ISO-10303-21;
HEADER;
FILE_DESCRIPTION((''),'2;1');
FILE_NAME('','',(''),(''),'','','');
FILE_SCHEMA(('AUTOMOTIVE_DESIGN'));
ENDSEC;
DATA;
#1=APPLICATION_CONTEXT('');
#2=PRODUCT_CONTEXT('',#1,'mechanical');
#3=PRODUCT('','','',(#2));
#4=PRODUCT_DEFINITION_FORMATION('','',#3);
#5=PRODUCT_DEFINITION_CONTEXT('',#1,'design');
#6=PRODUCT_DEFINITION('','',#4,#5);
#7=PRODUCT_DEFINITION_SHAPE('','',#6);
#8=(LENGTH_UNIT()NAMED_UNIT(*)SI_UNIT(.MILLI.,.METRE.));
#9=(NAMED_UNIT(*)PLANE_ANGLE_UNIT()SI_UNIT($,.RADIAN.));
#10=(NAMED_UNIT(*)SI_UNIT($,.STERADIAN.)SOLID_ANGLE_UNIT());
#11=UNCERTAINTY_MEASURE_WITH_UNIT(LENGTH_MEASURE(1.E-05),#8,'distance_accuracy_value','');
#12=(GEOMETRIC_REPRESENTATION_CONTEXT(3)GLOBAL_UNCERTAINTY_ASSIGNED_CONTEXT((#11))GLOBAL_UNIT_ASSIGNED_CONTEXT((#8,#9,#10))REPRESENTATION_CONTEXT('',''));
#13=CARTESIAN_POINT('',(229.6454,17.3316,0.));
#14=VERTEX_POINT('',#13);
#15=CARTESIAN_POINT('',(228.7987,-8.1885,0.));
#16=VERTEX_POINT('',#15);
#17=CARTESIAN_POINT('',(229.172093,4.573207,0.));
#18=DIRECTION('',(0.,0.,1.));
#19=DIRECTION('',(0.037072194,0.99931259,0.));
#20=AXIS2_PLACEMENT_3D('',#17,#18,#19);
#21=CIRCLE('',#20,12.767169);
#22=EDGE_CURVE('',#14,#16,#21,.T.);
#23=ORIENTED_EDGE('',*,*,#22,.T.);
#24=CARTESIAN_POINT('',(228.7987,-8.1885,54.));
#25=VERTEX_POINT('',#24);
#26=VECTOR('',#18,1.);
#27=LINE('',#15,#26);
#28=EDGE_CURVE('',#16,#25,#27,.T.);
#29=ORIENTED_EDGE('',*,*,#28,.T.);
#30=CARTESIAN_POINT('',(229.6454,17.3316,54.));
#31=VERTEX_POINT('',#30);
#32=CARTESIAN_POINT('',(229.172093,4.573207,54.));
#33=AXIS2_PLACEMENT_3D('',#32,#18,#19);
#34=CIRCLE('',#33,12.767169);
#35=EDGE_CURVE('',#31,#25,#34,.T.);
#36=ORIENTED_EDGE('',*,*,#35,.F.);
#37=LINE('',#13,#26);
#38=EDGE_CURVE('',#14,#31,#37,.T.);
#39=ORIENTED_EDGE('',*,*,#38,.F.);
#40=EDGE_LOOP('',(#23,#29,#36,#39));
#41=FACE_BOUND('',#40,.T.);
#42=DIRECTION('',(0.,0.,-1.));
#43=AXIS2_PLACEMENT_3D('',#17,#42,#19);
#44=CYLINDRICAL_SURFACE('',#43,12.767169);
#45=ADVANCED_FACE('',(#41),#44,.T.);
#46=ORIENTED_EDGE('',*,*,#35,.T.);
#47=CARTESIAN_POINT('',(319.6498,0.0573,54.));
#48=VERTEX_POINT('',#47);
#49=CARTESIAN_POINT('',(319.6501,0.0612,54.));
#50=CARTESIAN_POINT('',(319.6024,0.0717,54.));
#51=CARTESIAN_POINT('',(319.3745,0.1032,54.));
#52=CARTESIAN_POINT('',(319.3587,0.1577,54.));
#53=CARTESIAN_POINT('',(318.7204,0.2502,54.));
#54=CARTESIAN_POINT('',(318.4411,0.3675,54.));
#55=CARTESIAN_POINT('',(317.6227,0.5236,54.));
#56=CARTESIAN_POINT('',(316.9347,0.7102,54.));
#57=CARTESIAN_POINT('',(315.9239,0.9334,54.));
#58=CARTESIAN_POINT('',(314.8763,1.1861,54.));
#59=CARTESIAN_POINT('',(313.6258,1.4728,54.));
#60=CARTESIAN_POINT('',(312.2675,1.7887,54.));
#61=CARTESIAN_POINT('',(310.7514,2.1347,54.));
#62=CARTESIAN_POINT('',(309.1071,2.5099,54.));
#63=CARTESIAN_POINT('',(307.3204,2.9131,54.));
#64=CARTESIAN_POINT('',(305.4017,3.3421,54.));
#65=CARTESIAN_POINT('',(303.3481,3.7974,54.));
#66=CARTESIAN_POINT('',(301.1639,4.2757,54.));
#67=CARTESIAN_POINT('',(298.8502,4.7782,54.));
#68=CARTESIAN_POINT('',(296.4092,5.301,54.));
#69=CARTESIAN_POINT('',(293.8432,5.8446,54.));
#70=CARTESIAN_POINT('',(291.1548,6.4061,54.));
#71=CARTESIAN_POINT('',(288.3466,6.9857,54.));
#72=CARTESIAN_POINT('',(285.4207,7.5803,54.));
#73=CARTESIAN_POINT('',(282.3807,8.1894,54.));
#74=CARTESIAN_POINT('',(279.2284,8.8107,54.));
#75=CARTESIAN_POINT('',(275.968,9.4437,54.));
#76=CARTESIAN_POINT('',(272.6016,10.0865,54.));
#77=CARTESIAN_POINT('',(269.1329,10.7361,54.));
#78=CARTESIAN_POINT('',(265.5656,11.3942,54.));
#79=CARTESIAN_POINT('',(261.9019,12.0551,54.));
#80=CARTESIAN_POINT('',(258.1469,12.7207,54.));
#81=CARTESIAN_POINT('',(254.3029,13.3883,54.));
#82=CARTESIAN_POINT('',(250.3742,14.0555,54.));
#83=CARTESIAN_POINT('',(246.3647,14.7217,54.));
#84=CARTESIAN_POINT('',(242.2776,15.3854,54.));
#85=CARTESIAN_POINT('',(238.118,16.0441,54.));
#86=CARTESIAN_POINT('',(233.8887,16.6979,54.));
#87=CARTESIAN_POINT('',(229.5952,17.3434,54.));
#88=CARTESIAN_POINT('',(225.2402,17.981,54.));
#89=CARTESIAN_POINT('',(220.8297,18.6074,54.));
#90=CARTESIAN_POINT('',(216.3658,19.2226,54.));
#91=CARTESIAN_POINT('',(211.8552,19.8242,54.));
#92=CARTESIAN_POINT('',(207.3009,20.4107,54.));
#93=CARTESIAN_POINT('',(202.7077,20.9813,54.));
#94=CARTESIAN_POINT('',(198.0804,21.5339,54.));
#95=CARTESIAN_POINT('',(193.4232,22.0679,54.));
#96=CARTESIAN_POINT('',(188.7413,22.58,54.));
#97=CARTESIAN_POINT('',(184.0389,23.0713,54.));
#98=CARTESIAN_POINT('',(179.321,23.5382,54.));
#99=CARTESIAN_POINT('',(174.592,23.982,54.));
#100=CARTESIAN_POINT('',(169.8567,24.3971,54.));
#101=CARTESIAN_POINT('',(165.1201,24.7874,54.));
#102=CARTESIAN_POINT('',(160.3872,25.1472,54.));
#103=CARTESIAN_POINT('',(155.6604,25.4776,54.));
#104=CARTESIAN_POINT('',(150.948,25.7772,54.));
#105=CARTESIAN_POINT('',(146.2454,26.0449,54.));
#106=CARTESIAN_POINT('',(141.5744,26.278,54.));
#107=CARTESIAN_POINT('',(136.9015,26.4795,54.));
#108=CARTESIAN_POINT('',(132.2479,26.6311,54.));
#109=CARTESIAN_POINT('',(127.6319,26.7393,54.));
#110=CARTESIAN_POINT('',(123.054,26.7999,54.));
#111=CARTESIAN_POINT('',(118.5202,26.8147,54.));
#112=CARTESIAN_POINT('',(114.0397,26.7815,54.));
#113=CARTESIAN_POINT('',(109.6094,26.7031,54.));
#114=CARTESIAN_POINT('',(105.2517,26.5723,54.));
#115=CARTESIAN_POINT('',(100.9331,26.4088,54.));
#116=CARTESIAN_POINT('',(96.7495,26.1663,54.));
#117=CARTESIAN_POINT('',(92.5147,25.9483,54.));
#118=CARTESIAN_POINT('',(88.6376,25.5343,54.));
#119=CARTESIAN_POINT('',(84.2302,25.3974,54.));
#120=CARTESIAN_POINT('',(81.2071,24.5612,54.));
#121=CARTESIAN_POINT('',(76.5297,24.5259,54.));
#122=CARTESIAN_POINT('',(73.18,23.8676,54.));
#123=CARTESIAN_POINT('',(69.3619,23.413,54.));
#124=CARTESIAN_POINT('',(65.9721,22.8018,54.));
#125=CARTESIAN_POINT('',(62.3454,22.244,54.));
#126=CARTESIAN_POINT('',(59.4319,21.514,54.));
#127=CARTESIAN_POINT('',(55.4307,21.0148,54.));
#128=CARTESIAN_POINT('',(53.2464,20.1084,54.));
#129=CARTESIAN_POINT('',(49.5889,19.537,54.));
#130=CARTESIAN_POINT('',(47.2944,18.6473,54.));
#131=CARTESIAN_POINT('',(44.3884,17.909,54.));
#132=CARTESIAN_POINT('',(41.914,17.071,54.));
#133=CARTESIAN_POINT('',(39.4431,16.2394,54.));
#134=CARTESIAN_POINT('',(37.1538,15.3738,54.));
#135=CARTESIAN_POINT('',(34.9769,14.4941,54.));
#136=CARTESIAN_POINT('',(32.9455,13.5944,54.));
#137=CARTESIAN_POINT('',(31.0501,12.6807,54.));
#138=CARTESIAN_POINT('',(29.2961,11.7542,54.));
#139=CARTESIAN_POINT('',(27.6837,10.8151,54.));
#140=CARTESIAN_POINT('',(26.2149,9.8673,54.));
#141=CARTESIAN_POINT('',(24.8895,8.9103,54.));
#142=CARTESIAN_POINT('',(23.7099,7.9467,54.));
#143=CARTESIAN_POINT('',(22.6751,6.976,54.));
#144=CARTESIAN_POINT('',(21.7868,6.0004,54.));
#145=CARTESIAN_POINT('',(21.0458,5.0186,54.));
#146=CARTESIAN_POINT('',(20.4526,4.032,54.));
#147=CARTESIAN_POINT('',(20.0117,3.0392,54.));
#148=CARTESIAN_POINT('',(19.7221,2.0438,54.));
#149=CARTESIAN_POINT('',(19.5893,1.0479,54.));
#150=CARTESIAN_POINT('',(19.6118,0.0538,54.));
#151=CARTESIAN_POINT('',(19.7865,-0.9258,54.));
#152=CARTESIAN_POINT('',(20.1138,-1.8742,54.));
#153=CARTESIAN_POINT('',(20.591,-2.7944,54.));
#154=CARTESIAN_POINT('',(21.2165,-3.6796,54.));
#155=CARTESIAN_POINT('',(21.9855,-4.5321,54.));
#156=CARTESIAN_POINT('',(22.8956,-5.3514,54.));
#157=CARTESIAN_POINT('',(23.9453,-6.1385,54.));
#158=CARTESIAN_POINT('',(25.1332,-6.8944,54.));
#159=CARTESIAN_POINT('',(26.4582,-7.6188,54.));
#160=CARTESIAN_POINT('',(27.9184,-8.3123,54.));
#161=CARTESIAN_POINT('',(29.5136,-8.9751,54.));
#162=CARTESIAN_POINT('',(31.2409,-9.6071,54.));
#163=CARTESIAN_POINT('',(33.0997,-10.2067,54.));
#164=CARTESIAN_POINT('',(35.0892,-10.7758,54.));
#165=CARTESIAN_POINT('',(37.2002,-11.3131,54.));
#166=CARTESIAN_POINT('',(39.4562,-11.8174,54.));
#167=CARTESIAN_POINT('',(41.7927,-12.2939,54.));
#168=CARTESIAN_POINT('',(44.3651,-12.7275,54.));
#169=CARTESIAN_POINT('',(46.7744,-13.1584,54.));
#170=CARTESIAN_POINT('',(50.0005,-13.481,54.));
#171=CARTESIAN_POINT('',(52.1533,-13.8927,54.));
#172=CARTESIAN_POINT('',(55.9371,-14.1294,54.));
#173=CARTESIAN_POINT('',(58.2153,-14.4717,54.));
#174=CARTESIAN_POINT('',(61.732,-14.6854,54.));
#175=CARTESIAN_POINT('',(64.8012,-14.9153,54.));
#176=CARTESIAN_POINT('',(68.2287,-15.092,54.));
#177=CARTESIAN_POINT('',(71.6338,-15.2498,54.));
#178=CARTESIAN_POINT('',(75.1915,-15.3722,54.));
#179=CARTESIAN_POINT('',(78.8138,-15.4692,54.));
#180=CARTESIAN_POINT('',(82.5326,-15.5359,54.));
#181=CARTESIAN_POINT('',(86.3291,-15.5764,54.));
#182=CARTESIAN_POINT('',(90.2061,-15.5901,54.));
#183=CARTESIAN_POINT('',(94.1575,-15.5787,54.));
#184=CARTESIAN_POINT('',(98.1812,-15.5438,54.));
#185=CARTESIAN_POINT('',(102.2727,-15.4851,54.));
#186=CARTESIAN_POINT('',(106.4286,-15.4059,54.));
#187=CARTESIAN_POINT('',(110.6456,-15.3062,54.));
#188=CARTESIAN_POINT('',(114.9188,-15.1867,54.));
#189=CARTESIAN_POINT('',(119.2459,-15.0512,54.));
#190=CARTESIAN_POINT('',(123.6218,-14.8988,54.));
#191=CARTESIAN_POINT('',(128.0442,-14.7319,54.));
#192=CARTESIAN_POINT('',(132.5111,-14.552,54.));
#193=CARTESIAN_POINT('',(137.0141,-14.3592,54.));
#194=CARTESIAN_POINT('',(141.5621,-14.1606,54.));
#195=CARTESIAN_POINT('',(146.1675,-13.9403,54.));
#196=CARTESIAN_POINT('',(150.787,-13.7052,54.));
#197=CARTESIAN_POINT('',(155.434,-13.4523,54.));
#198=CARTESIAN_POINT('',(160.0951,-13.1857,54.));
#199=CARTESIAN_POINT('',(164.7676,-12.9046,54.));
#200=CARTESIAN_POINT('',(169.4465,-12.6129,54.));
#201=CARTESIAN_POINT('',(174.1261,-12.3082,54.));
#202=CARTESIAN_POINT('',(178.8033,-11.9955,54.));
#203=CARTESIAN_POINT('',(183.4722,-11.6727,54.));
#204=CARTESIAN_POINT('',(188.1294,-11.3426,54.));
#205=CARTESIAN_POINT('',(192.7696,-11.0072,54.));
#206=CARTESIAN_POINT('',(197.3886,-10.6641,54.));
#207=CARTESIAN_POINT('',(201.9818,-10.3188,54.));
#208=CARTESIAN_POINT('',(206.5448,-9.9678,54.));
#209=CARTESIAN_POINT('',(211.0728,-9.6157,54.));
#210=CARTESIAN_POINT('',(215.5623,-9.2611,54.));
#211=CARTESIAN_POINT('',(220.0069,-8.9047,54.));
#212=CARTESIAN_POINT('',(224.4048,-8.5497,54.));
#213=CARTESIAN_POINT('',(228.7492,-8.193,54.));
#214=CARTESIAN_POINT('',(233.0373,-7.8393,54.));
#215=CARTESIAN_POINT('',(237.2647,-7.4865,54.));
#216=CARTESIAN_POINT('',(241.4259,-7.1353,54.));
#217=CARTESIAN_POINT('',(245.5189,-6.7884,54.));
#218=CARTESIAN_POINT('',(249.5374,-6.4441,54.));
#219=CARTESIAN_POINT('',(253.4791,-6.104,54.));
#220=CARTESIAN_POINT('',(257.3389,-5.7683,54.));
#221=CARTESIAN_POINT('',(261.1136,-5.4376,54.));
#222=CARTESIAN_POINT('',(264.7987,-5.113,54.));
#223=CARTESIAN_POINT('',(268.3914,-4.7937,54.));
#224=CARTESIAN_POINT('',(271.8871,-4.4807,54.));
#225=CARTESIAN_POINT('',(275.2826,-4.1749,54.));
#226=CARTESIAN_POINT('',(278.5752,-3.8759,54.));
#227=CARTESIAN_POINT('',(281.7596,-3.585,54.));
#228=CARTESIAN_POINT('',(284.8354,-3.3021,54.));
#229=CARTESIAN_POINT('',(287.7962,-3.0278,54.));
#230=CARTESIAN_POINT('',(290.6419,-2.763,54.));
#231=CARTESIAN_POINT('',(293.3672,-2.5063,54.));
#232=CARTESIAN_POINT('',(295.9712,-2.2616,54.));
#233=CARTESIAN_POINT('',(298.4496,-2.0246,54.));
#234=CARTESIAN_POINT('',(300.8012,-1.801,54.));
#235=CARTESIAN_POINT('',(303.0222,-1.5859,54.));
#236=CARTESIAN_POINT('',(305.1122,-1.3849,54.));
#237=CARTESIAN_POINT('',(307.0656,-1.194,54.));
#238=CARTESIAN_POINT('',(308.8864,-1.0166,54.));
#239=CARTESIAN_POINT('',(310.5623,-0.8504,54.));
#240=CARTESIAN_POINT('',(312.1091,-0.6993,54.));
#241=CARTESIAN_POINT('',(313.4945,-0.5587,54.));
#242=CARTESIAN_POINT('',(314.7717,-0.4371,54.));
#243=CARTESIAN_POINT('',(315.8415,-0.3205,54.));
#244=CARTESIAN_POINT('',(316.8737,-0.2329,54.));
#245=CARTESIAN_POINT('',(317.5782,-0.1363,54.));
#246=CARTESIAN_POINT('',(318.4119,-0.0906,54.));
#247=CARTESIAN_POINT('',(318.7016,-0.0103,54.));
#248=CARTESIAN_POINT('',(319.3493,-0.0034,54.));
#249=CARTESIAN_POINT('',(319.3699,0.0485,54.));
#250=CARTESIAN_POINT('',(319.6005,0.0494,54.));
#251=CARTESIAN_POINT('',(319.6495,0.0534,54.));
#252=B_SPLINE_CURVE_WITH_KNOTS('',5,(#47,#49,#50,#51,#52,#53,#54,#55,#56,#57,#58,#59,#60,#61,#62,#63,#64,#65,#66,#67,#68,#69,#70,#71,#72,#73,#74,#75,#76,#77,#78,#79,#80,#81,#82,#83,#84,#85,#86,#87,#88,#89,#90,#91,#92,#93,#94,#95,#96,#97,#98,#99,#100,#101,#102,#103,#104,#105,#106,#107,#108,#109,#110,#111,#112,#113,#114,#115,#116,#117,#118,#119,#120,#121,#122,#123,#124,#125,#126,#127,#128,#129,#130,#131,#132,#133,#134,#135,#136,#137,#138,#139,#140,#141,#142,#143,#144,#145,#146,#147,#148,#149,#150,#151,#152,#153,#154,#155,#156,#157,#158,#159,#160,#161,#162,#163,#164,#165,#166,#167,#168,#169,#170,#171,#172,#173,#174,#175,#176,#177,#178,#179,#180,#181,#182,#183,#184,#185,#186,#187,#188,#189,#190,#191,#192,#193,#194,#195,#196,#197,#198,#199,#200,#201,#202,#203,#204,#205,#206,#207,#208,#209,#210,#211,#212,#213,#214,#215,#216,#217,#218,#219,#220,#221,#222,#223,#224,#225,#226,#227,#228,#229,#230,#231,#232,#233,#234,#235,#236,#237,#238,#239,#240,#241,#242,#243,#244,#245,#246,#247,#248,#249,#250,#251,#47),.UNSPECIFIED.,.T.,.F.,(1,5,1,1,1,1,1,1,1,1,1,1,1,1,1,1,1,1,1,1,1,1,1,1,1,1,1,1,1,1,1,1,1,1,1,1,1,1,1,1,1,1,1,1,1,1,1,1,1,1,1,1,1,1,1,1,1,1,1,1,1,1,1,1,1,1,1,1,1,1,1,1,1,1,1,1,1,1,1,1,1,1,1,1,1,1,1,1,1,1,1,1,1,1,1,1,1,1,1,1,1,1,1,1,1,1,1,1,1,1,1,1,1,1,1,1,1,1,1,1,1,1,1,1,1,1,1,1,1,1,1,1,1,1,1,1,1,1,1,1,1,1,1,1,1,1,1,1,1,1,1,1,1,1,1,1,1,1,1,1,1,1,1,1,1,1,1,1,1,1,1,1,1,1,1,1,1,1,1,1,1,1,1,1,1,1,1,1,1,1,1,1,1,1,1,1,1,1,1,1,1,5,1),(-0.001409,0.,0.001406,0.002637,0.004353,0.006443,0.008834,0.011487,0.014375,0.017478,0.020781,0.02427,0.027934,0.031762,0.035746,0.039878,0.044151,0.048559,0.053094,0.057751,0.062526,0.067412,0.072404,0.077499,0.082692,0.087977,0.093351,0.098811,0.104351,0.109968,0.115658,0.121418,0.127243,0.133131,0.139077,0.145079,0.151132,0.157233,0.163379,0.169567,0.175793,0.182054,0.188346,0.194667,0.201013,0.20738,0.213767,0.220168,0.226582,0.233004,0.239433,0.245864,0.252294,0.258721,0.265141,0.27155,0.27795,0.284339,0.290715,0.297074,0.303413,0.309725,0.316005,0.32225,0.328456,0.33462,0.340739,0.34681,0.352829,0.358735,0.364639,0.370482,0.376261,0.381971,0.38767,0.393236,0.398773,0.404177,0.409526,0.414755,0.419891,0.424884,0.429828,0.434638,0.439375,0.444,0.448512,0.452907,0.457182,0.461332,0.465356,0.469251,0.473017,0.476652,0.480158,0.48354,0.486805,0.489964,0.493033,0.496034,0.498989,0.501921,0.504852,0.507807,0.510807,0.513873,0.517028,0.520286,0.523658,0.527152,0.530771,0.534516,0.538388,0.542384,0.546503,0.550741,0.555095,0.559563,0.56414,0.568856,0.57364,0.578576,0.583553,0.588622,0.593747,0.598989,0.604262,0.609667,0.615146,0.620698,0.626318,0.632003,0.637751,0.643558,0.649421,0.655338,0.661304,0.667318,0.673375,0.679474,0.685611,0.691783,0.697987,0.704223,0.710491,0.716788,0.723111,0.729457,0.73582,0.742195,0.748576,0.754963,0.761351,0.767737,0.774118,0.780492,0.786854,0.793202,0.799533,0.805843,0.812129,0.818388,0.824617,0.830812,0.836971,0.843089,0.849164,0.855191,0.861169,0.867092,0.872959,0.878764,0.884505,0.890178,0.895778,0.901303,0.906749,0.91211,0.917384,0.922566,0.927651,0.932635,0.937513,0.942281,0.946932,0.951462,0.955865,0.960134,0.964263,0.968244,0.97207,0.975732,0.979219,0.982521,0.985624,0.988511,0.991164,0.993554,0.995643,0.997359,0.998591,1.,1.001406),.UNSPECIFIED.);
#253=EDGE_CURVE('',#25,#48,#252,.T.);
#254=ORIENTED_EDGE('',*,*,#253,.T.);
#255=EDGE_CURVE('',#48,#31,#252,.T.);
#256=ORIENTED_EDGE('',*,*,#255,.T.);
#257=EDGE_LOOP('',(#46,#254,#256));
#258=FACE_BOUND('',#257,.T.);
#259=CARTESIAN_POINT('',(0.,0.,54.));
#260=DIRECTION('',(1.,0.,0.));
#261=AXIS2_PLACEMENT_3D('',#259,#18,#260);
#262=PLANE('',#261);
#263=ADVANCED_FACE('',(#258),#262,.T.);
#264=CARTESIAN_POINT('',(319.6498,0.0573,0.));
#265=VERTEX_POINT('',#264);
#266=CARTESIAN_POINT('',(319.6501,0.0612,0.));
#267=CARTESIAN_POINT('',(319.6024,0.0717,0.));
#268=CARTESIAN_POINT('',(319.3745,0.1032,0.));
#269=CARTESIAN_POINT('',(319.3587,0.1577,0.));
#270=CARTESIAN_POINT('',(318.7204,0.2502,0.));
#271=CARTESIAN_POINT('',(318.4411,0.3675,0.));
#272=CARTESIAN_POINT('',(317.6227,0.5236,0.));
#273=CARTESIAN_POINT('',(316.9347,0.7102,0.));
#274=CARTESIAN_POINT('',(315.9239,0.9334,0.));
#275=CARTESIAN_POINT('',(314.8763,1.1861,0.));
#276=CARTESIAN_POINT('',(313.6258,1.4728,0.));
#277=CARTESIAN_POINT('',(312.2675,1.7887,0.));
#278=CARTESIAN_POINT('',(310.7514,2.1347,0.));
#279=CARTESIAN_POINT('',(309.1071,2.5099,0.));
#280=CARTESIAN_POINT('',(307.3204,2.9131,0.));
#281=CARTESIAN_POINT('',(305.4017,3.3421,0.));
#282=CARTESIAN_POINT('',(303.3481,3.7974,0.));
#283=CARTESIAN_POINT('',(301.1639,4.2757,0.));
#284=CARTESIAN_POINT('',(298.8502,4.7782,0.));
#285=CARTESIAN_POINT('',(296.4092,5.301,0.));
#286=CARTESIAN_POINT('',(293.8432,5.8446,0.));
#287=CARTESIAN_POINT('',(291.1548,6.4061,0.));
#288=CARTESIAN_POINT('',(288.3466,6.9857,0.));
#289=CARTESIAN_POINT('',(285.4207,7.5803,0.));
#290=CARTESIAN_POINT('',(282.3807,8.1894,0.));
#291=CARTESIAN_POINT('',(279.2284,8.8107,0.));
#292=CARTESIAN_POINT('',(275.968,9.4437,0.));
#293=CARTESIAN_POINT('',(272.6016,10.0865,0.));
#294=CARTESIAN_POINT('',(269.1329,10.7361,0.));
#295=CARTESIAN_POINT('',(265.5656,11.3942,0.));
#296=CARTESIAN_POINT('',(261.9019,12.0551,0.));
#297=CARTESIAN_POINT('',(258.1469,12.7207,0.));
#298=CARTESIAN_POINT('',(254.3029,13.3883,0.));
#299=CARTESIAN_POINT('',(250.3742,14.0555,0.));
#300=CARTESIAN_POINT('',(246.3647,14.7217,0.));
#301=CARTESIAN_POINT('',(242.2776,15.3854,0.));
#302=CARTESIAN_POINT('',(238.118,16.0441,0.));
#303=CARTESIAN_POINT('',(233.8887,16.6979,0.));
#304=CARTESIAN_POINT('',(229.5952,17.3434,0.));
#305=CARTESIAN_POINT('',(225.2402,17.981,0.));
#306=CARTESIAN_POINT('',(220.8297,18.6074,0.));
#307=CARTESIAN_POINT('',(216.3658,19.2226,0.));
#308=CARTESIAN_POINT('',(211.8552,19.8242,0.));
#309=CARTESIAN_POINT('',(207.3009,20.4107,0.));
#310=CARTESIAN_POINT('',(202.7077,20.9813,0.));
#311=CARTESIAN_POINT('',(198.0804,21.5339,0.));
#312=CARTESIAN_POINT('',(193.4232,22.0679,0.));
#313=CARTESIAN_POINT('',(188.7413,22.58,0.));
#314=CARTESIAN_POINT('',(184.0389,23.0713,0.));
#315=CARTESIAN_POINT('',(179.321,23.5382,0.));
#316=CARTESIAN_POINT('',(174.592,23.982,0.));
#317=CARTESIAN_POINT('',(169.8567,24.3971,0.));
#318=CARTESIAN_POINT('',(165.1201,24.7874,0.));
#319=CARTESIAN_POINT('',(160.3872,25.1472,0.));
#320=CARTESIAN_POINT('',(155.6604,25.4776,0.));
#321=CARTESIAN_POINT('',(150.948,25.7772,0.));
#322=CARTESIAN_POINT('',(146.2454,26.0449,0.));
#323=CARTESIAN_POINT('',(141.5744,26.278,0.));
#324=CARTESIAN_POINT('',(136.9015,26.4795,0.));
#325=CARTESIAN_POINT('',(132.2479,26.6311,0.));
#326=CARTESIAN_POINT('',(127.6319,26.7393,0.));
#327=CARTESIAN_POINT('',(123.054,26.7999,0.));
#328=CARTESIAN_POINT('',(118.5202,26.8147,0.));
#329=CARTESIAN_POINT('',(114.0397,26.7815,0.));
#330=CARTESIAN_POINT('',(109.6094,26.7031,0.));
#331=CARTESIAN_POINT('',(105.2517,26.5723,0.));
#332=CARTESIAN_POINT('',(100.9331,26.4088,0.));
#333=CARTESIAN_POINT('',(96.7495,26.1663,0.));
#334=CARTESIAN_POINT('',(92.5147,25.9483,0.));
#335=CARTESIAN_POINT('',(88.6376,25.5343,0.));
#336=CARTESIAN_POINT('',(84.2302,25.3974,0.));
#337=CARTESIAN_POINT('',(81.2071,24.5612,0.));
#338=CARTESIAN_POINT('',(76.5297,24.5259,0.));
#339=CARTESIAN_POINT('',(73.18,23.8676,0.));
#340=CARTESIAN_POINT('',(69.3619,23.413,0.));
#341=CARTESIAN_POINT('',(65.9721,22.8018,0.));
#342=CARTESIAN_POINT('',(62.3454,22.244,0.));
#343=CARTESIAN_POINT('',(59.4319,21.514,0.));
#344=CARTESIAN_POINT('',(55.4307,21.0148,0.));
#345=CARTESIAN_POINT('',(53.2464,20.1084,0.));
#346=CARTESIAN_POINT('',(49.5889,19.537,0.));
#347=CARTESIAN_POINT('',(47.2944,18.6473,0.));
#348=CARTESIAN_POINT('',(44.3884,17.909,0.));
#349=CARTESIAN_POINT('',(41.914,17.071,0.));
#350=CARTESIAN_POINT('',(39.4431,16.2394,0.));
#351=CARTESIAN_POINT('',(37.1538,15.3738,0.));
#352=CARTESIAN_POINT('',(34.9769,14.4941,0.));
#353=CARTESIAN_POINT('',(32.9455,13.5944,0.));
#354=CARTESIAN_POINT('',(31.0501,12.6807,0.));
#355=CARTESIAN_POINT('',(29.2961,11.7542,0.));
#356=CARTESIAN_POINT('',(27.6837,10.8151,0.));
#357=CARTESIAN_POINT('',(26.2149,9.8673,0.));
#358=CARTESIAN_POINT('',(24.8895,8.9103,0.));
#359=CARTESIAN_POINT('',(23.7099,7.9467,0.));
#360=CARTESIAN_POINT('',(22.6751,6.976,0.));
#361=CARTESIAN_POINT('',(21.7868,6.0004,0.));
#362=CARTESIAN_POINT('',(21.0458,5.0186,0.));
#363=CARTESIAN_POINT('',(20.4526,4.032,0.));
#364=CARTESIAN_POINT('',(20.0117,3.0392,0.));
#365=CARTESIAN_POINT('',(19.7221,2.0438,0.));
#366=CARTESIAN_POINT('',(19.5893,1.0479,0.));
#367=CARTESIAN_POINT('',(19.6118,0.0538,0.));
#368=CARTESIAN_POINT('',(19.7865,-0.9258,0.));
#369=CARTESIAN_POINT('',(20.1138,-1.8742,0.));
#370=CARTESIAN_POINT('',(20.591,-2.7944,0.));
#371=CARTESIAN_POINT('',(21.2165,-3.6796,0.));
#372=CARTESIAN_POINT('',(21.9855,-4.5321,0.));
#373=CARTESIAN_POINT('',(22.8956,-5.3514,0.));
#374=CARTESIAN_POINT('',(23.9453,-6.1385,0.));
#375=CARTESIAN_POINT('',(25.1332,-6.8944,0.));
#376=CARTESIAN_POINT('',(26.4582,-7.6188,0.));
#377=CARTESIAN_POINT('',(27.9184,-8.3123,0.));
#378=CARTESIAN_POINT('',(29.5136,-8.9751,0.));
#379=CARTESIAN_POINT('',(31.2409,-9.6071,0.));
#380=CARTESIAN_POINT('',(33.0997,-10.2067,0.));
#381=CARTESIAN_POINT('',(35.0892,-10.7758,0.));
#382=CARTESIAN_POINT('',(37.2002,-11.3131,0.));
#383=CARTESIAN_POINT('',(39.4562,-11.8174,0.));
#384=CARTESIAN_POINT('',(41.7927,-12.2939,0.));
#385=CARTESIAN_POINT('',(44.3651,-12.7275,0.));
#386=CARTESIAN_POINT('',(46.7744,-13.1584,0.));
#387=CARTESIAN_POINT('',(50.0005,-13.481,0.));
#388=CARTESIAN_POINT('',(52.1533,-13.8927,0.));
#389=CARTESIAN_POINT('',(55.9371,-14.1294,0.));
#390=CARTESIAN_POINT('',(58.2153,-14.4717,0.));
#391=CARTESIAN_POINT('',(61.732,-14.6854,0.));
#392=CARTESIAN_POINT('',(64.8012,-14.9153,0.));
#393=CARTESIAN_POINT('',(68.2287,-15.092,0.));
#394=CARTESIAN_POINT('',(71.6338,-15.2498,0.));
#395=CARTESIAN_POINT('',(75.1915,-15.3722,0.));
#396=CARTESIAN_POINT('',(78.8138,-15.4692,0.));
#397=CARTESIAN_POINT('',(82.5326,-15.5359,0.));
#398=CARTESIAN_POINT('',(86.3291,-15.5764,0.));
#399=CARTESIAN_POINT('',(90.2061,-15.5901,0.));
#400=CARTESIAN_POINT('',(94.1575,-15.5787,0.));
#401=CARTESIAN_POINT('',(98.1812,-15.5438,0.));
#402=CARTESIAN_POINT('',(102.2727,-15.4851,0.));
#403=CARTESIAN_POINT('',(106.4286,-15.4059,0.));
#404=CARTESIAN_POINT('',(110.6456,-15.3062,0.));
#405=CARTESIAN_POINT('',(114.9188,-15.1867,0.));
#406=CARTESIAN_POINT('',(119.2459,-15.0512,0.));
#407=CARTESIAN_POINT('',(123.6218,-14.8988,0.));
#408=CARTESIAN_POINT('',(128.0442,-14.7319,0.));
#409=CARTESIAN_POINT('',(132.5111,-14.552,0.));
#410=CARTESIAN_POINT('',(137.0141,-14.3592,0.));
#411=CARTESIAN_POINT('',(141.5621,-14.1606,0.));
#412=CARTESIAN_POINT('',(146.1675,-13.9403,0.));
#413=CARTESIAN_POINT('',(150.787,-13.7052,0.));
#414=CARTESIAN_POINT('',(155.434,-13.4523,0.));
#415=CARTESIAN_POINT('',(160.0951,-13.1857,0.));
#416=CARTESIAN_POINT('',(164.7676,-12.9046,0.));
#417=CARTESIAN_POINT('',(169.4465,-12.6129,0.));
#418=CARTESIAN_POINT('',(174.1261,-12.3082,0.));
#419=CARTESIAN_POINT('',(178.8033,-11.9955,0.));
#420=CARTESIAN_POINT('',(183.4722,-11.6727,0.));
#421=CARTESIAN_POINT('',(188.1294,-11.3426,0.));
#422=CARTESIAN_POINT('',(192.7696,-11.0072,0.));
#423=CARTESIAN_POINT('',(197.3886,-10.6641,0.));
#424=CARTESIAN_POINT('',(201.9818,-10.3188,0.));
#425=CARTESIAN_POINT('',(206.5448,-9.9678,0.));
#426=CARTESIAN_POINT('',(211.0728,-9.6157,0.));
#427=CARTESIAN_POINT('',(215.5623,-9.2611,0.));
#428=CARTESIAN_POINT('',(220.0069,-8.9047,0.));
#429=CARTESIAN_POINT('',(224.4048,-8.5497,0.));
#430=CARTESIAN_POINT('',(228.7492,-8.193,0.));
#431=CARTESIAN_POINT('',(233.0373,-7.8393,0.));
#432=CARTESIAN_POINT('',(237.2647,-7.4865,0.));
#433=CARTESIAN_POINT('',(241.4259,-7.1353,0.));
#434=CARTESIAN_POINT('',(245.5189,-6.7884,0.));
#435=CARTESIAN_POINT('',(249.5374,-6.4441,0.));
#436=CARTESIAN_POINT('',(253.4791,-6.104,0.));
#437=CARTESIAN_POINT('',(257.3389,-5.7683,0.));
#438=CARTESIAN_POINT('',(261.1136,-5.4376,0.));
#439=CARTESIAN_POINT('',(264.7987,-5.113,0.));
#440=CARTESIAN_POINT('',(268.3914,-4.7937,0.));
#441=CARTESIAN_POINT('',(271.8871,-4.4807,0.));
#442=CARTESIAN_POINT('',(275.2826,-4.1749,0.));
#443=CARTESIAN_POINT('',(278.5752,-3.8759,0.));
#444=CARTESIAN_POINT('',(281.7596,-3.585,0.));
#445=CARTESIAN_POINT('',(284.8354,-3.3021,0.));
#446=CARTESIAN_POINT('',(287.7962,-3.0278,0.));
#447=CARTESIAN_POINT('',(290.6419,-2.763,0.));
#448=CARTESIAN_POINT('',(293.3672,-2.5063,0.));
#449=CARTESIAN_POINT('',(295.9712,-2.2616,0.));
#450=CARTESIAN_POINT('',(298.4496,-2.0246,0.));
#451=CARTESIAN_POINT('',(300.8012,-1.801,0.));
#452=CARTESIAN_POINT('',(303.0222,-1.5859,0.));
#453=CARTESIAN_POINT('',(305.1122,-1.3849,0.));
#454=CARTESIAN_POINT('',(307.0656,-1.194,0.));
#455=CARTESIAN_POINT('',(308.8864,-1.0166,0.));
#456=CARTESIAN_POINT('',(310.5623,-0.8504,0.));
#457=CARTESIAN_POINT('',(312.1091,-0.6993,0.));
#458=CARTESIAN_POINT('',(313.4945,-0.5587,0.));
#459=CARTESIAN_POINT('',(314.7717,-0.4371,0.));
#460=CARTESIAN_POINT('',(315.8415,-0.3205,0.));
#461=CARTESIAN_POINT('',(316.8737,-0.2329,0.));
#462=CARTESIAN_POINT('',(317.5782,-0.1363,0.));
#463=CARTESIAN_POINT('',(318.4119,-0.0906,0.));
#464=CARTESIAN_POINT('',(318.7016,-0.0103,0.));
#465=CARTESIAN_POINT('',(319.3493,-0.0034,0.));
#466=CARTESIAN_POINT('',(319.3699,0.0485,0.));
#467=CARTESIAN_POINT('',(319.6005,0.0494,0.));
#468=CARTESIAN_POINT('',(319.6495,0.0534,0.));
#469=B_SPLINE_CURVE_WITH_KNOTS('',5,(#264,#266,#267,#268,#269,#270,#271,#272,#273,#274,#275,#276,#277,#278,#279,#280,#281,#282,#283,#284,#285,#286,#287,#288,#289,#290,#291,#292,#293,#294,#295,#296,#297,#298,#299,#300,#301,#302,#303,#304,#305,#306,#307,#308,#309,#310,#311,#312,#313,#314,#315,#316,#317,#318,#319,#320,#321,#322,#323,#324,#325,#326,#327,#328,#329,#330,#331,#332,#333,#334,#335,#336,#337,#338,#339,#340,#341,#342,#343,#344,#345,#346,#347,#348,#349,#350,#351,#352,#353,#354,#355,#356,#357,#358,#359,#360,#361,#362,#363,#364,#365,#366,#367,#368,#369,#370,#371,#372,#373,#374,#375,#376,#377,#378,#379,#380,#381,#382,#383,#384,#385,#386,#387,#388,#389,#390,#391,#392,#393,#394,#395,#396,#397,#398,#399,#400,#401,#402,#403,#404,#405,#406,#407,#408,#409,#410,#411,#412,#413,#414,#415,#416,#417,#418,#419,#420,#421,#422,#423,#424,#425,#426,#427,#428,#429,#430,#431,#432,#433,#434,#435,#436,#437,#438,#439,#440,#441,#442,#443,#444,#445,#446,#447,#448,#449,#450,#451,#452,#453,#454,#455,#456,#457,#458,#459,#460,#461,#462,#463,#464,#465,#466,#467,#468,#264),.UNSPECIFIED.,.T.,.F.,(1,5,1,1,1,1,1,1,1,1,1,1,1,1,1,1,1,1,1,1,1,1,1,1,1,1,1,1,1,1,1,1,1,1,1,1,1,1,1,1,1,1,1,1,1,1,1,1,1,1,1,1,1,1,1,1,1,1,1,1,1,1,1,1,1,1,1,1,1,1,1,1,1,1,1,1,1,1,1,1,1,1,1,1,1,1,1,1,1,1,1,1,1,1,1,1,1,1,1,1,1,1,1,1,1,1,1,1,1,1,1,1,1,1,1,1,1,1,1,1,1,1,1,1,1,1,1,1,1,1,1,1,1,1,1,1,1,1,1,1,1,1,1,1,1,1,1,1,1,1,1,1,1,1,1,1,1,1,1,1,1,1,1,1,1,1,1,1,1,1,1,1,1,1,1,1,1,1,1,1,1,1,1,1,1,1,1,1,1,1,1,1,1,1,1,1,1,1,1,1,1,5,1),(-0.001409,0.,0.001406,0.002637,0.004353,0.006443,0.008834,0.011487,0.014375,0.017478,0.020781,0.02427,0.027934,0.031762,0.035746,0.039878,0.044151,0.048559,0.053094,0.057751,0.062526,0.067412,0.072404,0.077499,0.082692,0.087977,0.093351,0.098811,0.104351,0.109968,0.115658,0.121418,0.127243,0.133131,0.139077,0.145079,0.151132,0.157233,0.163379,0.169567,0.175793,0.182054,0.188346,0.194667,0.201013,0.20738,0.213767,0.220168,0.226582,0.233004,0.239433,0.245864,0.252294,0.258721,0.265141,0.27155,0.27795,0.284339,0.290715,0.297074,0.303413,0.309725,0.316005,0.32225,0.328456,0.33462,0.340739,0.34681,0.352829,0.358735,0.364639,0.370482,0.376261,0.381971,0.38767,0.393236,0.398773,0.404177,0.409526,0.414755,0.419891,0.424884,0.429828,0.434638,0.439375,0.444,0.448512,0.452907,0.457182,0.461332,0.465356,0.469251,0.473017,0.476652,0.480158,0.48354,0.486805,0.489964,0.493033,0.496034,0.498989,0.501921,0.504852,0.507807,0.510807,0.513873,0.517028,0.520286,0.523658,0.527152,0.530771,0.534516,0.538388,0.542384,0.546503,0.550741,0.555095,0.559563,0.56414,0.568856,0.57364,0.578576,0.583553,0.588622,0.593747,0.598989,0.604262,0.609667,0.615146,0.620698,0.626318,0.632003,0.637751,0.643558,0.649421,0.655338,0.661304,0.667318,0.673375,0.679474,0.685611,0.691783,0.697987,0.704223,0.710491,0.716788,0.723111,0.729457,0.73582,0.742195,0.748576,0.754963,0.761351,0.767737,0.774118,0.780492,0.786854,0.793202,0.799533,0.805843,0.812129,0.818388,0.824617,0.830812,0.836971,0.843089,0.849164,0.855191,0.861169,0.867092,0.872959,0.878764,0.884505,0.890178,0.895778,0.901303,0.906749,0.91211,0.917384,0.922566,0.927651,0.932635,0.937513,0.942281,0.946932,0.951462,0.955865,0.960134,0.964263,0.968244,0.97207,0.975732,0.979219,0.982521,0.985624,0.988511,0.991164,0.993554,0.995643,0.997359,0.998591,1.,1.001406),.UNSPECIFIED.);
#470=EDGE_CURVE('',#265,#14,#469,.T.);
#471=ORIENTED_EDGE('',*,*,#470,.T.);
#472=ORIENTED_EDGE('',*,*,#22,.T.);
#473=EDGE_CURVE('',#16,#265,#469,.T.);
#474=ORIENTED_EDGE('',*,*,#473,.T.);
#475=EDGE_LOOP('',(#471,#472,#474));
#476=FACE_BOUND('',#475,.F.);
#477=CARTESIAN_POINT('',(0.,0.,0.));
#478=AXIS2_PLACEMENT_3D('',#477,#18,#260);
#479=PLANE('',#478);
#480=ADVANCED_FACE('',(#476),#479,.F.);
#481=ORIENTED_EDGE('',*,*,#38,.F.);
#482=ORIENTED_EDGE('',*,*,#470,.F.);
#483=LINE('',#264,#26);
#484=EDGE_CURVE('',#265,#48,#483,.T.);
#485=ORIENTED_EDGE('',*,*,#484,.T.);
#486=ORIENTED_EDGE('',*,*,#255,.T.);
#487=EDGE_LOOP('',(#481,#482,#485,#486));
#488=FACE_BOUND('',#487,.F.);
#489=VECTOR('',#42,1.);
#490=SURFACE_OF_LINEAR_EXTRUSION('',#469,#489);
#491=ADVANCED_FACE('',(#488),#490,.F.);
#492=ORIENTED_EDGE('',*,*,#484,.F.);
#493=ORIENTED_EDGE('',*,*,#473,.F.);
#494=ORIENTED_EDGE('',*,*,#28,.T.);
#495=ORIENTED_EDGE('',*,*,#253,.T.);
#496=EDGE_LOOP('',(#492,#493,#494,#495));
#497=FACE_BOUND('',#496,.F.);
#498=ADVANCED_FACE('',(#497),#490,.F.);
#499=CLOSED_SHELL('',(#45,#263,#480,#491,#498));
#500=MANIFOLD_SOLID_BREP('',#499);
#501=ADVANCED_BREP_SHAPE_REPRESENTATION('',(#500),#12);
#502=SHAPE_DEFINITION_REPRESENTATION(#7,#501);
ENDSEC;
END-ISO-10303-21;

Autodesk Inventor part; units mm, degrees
ref_plane "YZ Plane" through (0, 0, 0) normal (1, 0, 0) x (0, 1, 0)
ref_plane "XZ Plane" through (0, 0, 0) normal (0, 1, 0) x (-1, 0, 0)
ref_plane "XY Plane" through (0, 0, 0) normal (0, 0, 1) x (1, 0, 0)
sketch "Sketch2" plane through (0, 0, 0) normal (0, 0, 1) x (1, 0, 0)
  spline S0 degree 5 poles (319.6498, 0.0573) (319.6501, 0.0612) (319.6024, 0.0717) (319.3745, 0.1032) (319.3587, 0.1577) (318.7204, 0.2502) (318.4411, 0.3675) (317.6227, 0.5236) (316.9347, 0.7102) (315.9239, 0.9334) (314.8763, 1.1861) (313.6258, 1.4728) (312.2675, 1.7887) (310.7514, 2.1347) (309.1071, 2.5099) (307.3204, 2.9131) (305.4017, 3.3421) (303.3481, 3.7974) (301.1639, 4.2757) (298.8502, 4.7782) (296.4092, 5.301) (293.8432, 5.8446) (291.1548, 6.4061) (288.3466, 6.9857) (285.4207, 7.5803) (282.3807, 8.1894) (279.2284, 8.8107) (275.968, 9.4437) (272.6016, 10.0865) (269.1329, 10.7361) (265.5656, 11.3942) (261.9019, 12.0551) (258.1469, 12.7207) (254.3029, 13.3883) (250.3742, 14.0555) (246.3647, 14.7217) (242.2776, 15.3854) (238.118, 16.0441) (233.8887, 16.6979) (229.5952, 17.3434) (225.2402, 17.981) (220.8297, 18.6074) (216.3658, 19.2226) (211.8552, 19.8242) (207.3009, 20.4107) (202.7077, 20.9813) (198.0804, 21.5339) (193.4232, 22.0679) (188.7413, 22.58) (184.0389, 23.0713) (179.321, 23.5382) (174.592, 23.982) (169.8567, 24.3971) (165.1201, 24.7874) (160.3872, 25.1472) (155.6604, 25.4776) (150.948, 25.7772) (146.2454, 26.0449) (141.5744, 26.278) (136.9015, 26.4795) (132.2479, 26.6311) (127.6319, 26.7393) (123.054, 26.7999) (118.5202, 26.8147) (114.0397, 26.7815) (109.6094, 26.7031) (105.2517, 26.5723) (100.9331, 26.4088) (96.7495, 26.1663) (92.5147, 25.9483) (88.6376, 25.5343) (84.2302, 25.3974) (81.2071, 24.5612) (76.5297, 24.5259) (73.18, 23.8676) (69.3619, 23.413) (65.9721, 22.8018) (62.3454, 22.244) (59.4319, 21.514) (55.4307, 21.0148) (53.2464, 20.1084) (49.5889, 19.537) (47.2944, 18.6473) (44.3884, 17.909) (41.914, 17.071) (39.4431, 16.2394) (37.1538, 15.3738) (34.9769, 14.4941) (32.9455, 13.5944) (31.0501, 12.6807) (29.2961, 11.7542) (27.6837, 10.8151) (26.2149, 9.8673) (24.8895, 8.9103) (23.7099, 7.9467) (22.6751, 6.976) (21.7868, 6.0004) (21.0458, 5.0186) (20.4526, 4.032) (20.0117, 3.0392) (19.7221, 2.0438) (19.5893, 1.0479) (19.6118, 0.0538) (19.7865, -0.9258) (20.1138, -1.8742) (20.591, -2.7944) (21.2165, -3.6796) (21.9855, -4.5321) (22.8956, -5.3514) (23.9453, -6.1385) (25.1332, -6.8944) (26.4582, -7.6188) (27.9184, -8.3123) (29.5136, -8.9751) (31.2409, -9.6071) (33.0997, -10.2067) (35.0892, -10.7758) (37.2002, -11.3131) (39.4562, -11.8174) (41.7927, -12.2939) (44.3651, -12.7275) (46.7744, -13.1584) (50.0005, -13.481) (52.1533, -13.8927) (55.9371, -14.1294) (58.2153, -14.4717) (61.732, -14.6854) (64.8012, -14.9153) (68.2287, -15.092) (71.6338, -15.2498) (75.1915, -15.3722) (78.8138, -15.4692) (82.5326, -15.5359) (86.3291, -15.5764) (90.2061, -15.5901) (94.1575, -15.5787) (98.1812, -15.5438) (102.2727, -15.4851) (106.4286, -15.4059) (110.6456, -15.3062) (114.9188, -15.1867) (119.2459, -15.0512) (123.6218, -14.8988) (128.0442, -14.7319) (132.5111, -14.552) (137.0141, -14.3592) (141.5621, -14.1606) (146.1675, -13.9403) (150.787, -13.7052) (155.434, -13.4523) (160.0951, -13.1857) (164.7676, -12.9046) (169.4465, -12.6129) (174.1261, -12.3082) (178.8033, -11.9955) (183.4722, -11.6727) (188.1294, -11.3426) (192.7696, -11.0072) (197.3886, -10.6641) (201.9818, -10.3188) (206.5448, -9.9678) (211.0728, -9.6157) (215.5623, -9.2611) (220.0069, -8.9047) (224.4048, -8.5497) (228.7492, -8.193) (233.0373, -7.8393) (237.2647, -7.4865) (241.4259, -7.1353) (245.5189, -6.7884) (249.5374, -6.4441) (253.4791, -6.104) (257.3389, -5.7683) (261.1136, -5.4376) (264.7987, -5.113) (268.3914, -4.7937) (271.8871, -4.4807) (275.2826, -4.1749) (278.5752, -3.8759) (281.7596, -3.585) (284.8354, -3.3021) (287.7962, -3.0278) (290.6419, -2.763) (293.3672, -2.5063) (295.9712, -2.2616) (298.4496, -2.0246) (300.8012, -1.801) (303.0222, -1.5859) (305.1122, -1.3849) (307.0656, -1.194) (308.8864, -1.0166) (310.5623, -0.8504) (312.1091, -0.6993) (313.4945, -0.5587) (314.7717, -0.4371) (315.8415, -0.3205) (316.8737, -0.2329) (317.5782, -0.1363) (318.4119, -0.0906) (318.7016, -0.0103) (319.3493, -0.0034) (319.3699, 0.0485) (319.6005, 0.0494) (319.6495, 0.0534) (319.6498, 0.0573) knots 0 0 0 0 0 0 0.001406 0.002637 0.004353 0.006443 0.008834 0.011487 0.014375 0.017478 0.020781 0.02427 0.027934 0.031762 0.035746 0.039878 0.044151 0.048559 0.053094 0.057751 0.062526 0.067412 0.072404 0.077499 0.082692 0.087977 0.093351 0.098811 0.104351 0.109968 0.115658 0.121418 0.127243 0.133131 0.139077 0.145079 0.151132 0.157233 0.163379 0.169567 0.175793 0.182054 0.188346 0.194667 0.201013 0.20738 0.213767 0.220168 0.226582 0.233004 0.239433 0.245864 0.252294 0.258721 0.265141 0.27155 0.27795 0.284339 0.290715 0.297074 0.303413 0.309725 0.316005 0.32225 0.328456 0.33462 0.340739 0.34681 0.352829 0.358735 0.364639 0.370482 0.376261 0.381971 0.38767 0.393236 0.398773 0.404177 0.409526 0.414755 0.419891 0.424884 0.429828 0.434638 0.439375 0.444 0.448512 0.452907 0.457182 0.461332 0.465356 0.469251 0.473017 0.476652 0.480158 0.48354 0.486805 0.489964 0.493033 0.496034 0.498989 0.501921 0.504852 0.507807 0.510807 0.513873 0.517028 0.520286 0.523658 0.527152 0.530771 0.534516 0.538388 0.542384 0.546503 0.550741 0.555095 0.559563 0.56414 0.568856 0.57364 0.578576 0.583553 0.588622 0.593747 0.598989 0.604262 0.609667 0.615146 0.620698 0.626318 0.632003 0.637751 0.643558 0.649421 0.655338 0.661304 0.667318 0.673375 0.679474 0.685611 0.691783 0.697987 0.704223 0.710491 0.716788 0.723111 0.729457 0.73582 0.742195 0.748576 0.754963 0.761351 0.767737 0.774118 0.780492 0.786854 0.793202 0.799533 0.805843 0.812129 0.818388 0.824617 0.830812 0.836971 0.843089 0.849164 0.855191 0.861169 0.867092 0.872959 0.878764 0.884505 0.890178 0.895778 0.901303 0.906749 0.91211 0.917384 0.922566 0.927651 0.932635 0.937513 0.942281 0.946932 0.951462 0.955865 0.960134 0.964263 0.968244 0.97207 0.975732 0.979219 0.982521 0.985624 0.988511 0.991164 0.993554 0.995643 0.997359 0.998591 1 1 1 1 1 1
  circle A0 centre (83.0595, 4.5678) radius 11.5675
  line L0 (83.0595, 4.5678) -> (83.0595, 25.0384) construction
  line L1 (83.0595, 4.5678) -> (209.6498, 4.5678) construction
  line L2 (319.6498, 0.0573) -> (219.6498, 0.0573) construction
  line L3 (219.6499, 18.7671) -> (219.6499, -8.9327) construction
  line L4 (28.0055, 4.5054) -> (28.0055, -2.4946)
  line L5 (19.627, 1.0326) -> (319.6498, 0.0573) construction
  line L6 (49.7105, 14.4213) -> (55.6079, 14.4213)
  line L7 (49.7104, -8.4915) -> (55.6078, -8.4915)
  line L8 (28.0055, 4.5054) -> (49.7105, 14.4213)
  line L9 (28.0055, -2.4946) -> (49.7104, -8.4915)
  line L10 (55.6079, 14.4213) -> (55.6079, 20.8726)
  line L11 (55.6078, -8.4915) -> (55.6078, -14.1513)
  line L12 (108.6496, 16.3299) -> (108.6496, -7.1942)
  line L13 (110.8735, -9.1817) -> (193.8736, 0.1678)
  line L14 (195.6498, 2.1552) -> (195.6498, 6.9805)
  line L15 (193.8736, 8.9679) -> (110.8735, 18.3173)
  arc A1 (110.8735, 18.3173) -> (108.6496, 16.3299) centre (110.6496, 16.3299) ccw
  arc A2 (108.6496, -7.1942) -> (110.8735, -9.1817) centre (110.6496, -7.1942) ccw
  arc A3 (193.8736, 0.1678) -> (195.6498, 2.1552) centre (193.6498, 2.1552) ccw
  arc A4 (195.6498, 6.9805) -> (193.8736, 8.9679) centre (193.6498, 6.9805) ccw
  circle A5 centre (209.6498, 0.0573) radius 6.25
  arc A6 (229.6454, 17.3316) -> (228.7987, -8.1885) centre (229.1721, 4.5732) ccw
  point P0 (0, 0)
  point P1 (319.3573, 0.1272)
  point P2 (318.9918, 0.2142)
  point P3 (318.4802, 0.3354)
  point P4 (317.8238, 0.4911)
  point P5 (317.0222, 0.6801)
  point P6 (316.0769, 0.9024)
  point P7 (314.9885, 1.1568)
  point P8 (313.7582, 1.443)
  point P9 (312.3866, 1.7598)
  point P10 (310.8752, 2.1063)
  point P11 (309.2258, 2.4819)
  point P12 (307.4393, 2.8854)
  point P13 (305.5178, 3.3153)
  point P14 (303.4628, 3.7707)
  point P15 (301.2764, 4.2501)
  point P16 (298.9607, 4.7526)
  point P17 (296.5175, 5.2764)
  point P18 (293.9492, 5.8203)
  point P19 (291.2585, 6.3828)
  point P20 (288.4478, 6.9627)
  point P21 (285.5195, 7.5582)
  point P22 (282.4766, 8.1678)
  point P23 (279.3218, 8.79)
  point P24 (276.0584, 9.4236)
  point P25 (272.6891, 10.0668)
  point P26 (269.2175, 10.7178)
  point P27 (265.6469, 11.3757)
  point P28 (261.9803, 12.0381)
  point P29 (258.2219, 12.7041)
  point P30 (254.3747, 13.3722)
  point P31 (250.4426, 14.0403)
  point P32 (246.4295, 14.7072)
  point P33 (242.339, 15.3714)
  point P34 (238.1756, 16.0311)
  point P35 (233.9428, 16.6851)
  point P36 (225.2869, 17.9694)
  point P37 (220.8723, 18.5967)
  point P38 (216.4049, 19.2123)
  point P39 (211.8901, 19.8144)
  point P40 (207.332, 20.4015)
  point P41 (202.7347, 20.9724)
  point P42 (198.1034, 21.5256)
  point P43 (193.4423, 22.0596)
  point P44 (188.7563, 22.5726)
  point P45 (184.0499, 23.0637)
  point P46 (179.3279, 23.5314)
  point P47 (174.5948, 23.9745)
  point P48 (169.8554, 24.3909)
  point P49 (165.1148, 24.7803)
  point P50 (160.3775, 25.1406)
  point P51 (155.6479, 25.4709)
  point P52 (150.9316, 25.7703)
  point P53 (146.233, 26.0373)
  point P54 (141.557, 26.2707)
  point P55 (136.882, 26.4681)
  point P56 (132.2209, 26.6211)
  point P57 (127.5964, 26.7282)
  point P58 (123.0133, 26.7888)
  point P59 (118.4761, 26.8026)
  point P60 (113.9902, 26.7693)
  point P61 (109.5601, 26.6886)
  point P62 (105.191, 26.5611)
  point P63 (100.8866, 26.3866)
  point P64 (96.6524, 26.1647)
  point P65 (92.4927, 25.8975)
  point P66 (88.4121, 25.5832)
  point P67 (84.4152, 25.2282)
  point P68 (80.9052, 24.7441)
  point P69 (76.6873, 24.3761)
  point P70 (72.9635, 23.8905)
  point P71 (69.3402, 23.3611)
  point P72 (65.8208, 22.7938)
  point P73 (62.4086, 22.1883)
  point P74 (59.107, 21.5464)
  point P75 (52.8493, 20.1606)
  point P76 (49.7105, 19.4213)
  point P77 (47.0737, 18.6507)
  point P78 (44.3741, 17.8542)
  point P79 (41.8034, 17.0322)
  point P80 (39.3638, 16.1874)
  point P81 (37.0583, 15.3213)
  point P82 (34.8884, 14.4363)
  point P83 (32.8568, 13.534)
  point P84 (30.965, 12.6166)
  point P85 (29.2145, 11.686)
  point P86 (27.6071, 10.7437)
  point P87 (26.1443, 9.7921)
  point P88 (24.8269, 8.8324)
  point P89 (23.6566, 7.8664)
  point P90 (22.6336, 6.8953)
  point P91 (21.7591, 5.9209)
  point P92 (21.0334, 4.9441)
  point P93 (20.4571, 3.9661)
  point P94 (20.0308, 2.9875)
  point P95 (19.7539, 2.0098)
  point P96 (19.6496, 0.0573)
  point P97 (19.8205, -0.9033)
  point P98 (20.1376, -1.8357)
  point P99 (20.6002, -2.7402)
  point P100 (21.208, -3.6159)
  point P101 (21.9598, -4.4628)
  point P102 (22.8544, -5.2806)
  point P103 (23.8909, -6.069)
  point P104 (25.0681, -6.8277)
  point P105 (26.3846, -7.5561)
  point P106 (27.8384, -8.2539)
  point P107 (29.4284, -8.9211)
  point P108 (31.1522, -9.5571)
  point P109 (33.0086, -10.1613)
  point P110 (34.9949, -10.734)
  point P111 (37.1093, -11.2746)
  point P112 (39.3497, -11.7828)
  point P113 (41.7134, -12.2586)
  point P114 (44.198, -12.702)
  point P115 (46.8014, -13.1127)
  point P116 (49.7104, -13.4915)
  point P117 (52.3532, -13.8357)
  point P118 (58.3469, -14.4294)
  point P119 (61.5023, -14.6781)
  point P120 (64.7591, -14.8953)
  point P121 (68.1149, -15.0813)
  point P122 (71.5661, -15.237)
  point P123 (75.1094, -15.3627)
  point P124 (78.7418, -15.4596)
  point P125 (82.46, -15.528)
  point P126 (86.2607, -15.5691)
  point P127 (90.14, -15.5838)
  point P128 (94.0946, -15.5733)
  point P129 (98.1212, -15.5388)
  point P130 (102.2159, -15.4812)
  point P131 (106.3751, -15.4023)
  point P132 (110.5952, -15.303)
  point P133 (114.872, -15.1845)
  point P134 (119.2022, -15.0489)
  point P135 (123.5813, -14.8971)
  point P136 (128.006, -14.7306)
  point P137 (132.4718, -14.5509)
  point P138 (136.9748, -14.3598)
  point P139 (141.5285, -14.1576)
  point P140 (146.1365, -13.9383)
  point P141 (150.7679, -13.7022)
  point P142 (155.4191, -13.4499)
  point P143 (160.0853, -13.1829)
  point P144 (164.7617, -12.9024)
  point P145 (169.4444, -12.6099)
  point P146 (174.1283, -12.306)
  point P147 (178.8092, -11.9925)
  point P148 (183.4823, -11.67)
  point P149 (188.1434, -11.34)
  point P150 (192.7877, -11.0037)
  point P151 (197.4106, -10.6614)
  point P152 (202.0079, -10.3149)
  point P153 (206.5747, -9.9645)
  point P154 (211.1069, -9.6117)
  point P155 (215.5999, -9.2568)
  point P156 (220.0489, -8.9007)
  point P157 (224.4503, -8.5446)
  point P158 (233.0906, -7.8339)
  point P159 (237.3214, -7.4808)
  point P160 (241.4866, -7.1298)
  point P161 (245.5828, -6.7821)
  point P162 (249.6052, -6.4377)
  point P163 (253.5502, -6.0972)
  point P164 (257.4136, -5.7612)
  point P165 (261.1915, -5.4303)
  point P166 (264.88, -5.1051)
  point P167 (268.4758, -4.7856)
  point P168 (271.9747, -4.4724)
  point P169 (275.3734, -4.1661)
  point P170 (278.6686, -3.867)
  point P171 (281.8564, -3.5757)
  point P172 (284.9344, -3.2925)
  point P173 (287.8984, -3.018)
  point P174 (290.7463, -2.7525)
  point P175 (293.4745, -2.4963)
  point P176 (296.0806, -2.2503)
  point P177 (298.5616, -2.0142)
  point P178 (300.9151, -1.7892)
  point P179 (303.1387, -1.575)
  point P180 (305.23, -1.3728)
  point P181 (307.1866, -1.1823)
  point P182 (309.007, -1.0041)
  point P183 (310.6885, -0.8385)
  point P184 (312.2302, -0.6861)
  point P185 (313.6297, -0.5472)
  point P186 (314.8861, -0.4221)
  point P187 (315.9976, -0.3108)
  point P188 (316.9636, -0.2139)
  point P189 (317.7826, -0.1314)
  point P190 (318.4537, -0.0636)
  point P191 (318.9766, -0.0108)
  point P192 (319.3503, 0.027)
  point P193 (319.5743, 0.0498)
  point P194 (28.0055, 1.0054)
  point P195 (108.6496, 18.5678)
  point P196 (108.6496, -9.4322)
  point P197 (195.6498, 0.3678)
  point P198 (195.6498, 8.7678)
  point P199 (108.6496, 4.5678)
  dimension "d2" = 300.0001
  dimension "d22" = 100
  dimension "d23" = 7
  dimension "d24" = 5
  dimension "d25" = 5
  dimension "d30" = 28
  dimension "d31" = 8.4
  dimension "d34" = 2
  dimension "d37" = 23.135
  dimension "d43" = 63.4325
  dimension "d44" = 12.5
  dimension "d45" = 110
extrude "Extrusion6" add sketch "Sketch2" along normal blind 54 contours S0 A6
properties part number "2414 basic aerofoil" material "Polyurethane Foam"
